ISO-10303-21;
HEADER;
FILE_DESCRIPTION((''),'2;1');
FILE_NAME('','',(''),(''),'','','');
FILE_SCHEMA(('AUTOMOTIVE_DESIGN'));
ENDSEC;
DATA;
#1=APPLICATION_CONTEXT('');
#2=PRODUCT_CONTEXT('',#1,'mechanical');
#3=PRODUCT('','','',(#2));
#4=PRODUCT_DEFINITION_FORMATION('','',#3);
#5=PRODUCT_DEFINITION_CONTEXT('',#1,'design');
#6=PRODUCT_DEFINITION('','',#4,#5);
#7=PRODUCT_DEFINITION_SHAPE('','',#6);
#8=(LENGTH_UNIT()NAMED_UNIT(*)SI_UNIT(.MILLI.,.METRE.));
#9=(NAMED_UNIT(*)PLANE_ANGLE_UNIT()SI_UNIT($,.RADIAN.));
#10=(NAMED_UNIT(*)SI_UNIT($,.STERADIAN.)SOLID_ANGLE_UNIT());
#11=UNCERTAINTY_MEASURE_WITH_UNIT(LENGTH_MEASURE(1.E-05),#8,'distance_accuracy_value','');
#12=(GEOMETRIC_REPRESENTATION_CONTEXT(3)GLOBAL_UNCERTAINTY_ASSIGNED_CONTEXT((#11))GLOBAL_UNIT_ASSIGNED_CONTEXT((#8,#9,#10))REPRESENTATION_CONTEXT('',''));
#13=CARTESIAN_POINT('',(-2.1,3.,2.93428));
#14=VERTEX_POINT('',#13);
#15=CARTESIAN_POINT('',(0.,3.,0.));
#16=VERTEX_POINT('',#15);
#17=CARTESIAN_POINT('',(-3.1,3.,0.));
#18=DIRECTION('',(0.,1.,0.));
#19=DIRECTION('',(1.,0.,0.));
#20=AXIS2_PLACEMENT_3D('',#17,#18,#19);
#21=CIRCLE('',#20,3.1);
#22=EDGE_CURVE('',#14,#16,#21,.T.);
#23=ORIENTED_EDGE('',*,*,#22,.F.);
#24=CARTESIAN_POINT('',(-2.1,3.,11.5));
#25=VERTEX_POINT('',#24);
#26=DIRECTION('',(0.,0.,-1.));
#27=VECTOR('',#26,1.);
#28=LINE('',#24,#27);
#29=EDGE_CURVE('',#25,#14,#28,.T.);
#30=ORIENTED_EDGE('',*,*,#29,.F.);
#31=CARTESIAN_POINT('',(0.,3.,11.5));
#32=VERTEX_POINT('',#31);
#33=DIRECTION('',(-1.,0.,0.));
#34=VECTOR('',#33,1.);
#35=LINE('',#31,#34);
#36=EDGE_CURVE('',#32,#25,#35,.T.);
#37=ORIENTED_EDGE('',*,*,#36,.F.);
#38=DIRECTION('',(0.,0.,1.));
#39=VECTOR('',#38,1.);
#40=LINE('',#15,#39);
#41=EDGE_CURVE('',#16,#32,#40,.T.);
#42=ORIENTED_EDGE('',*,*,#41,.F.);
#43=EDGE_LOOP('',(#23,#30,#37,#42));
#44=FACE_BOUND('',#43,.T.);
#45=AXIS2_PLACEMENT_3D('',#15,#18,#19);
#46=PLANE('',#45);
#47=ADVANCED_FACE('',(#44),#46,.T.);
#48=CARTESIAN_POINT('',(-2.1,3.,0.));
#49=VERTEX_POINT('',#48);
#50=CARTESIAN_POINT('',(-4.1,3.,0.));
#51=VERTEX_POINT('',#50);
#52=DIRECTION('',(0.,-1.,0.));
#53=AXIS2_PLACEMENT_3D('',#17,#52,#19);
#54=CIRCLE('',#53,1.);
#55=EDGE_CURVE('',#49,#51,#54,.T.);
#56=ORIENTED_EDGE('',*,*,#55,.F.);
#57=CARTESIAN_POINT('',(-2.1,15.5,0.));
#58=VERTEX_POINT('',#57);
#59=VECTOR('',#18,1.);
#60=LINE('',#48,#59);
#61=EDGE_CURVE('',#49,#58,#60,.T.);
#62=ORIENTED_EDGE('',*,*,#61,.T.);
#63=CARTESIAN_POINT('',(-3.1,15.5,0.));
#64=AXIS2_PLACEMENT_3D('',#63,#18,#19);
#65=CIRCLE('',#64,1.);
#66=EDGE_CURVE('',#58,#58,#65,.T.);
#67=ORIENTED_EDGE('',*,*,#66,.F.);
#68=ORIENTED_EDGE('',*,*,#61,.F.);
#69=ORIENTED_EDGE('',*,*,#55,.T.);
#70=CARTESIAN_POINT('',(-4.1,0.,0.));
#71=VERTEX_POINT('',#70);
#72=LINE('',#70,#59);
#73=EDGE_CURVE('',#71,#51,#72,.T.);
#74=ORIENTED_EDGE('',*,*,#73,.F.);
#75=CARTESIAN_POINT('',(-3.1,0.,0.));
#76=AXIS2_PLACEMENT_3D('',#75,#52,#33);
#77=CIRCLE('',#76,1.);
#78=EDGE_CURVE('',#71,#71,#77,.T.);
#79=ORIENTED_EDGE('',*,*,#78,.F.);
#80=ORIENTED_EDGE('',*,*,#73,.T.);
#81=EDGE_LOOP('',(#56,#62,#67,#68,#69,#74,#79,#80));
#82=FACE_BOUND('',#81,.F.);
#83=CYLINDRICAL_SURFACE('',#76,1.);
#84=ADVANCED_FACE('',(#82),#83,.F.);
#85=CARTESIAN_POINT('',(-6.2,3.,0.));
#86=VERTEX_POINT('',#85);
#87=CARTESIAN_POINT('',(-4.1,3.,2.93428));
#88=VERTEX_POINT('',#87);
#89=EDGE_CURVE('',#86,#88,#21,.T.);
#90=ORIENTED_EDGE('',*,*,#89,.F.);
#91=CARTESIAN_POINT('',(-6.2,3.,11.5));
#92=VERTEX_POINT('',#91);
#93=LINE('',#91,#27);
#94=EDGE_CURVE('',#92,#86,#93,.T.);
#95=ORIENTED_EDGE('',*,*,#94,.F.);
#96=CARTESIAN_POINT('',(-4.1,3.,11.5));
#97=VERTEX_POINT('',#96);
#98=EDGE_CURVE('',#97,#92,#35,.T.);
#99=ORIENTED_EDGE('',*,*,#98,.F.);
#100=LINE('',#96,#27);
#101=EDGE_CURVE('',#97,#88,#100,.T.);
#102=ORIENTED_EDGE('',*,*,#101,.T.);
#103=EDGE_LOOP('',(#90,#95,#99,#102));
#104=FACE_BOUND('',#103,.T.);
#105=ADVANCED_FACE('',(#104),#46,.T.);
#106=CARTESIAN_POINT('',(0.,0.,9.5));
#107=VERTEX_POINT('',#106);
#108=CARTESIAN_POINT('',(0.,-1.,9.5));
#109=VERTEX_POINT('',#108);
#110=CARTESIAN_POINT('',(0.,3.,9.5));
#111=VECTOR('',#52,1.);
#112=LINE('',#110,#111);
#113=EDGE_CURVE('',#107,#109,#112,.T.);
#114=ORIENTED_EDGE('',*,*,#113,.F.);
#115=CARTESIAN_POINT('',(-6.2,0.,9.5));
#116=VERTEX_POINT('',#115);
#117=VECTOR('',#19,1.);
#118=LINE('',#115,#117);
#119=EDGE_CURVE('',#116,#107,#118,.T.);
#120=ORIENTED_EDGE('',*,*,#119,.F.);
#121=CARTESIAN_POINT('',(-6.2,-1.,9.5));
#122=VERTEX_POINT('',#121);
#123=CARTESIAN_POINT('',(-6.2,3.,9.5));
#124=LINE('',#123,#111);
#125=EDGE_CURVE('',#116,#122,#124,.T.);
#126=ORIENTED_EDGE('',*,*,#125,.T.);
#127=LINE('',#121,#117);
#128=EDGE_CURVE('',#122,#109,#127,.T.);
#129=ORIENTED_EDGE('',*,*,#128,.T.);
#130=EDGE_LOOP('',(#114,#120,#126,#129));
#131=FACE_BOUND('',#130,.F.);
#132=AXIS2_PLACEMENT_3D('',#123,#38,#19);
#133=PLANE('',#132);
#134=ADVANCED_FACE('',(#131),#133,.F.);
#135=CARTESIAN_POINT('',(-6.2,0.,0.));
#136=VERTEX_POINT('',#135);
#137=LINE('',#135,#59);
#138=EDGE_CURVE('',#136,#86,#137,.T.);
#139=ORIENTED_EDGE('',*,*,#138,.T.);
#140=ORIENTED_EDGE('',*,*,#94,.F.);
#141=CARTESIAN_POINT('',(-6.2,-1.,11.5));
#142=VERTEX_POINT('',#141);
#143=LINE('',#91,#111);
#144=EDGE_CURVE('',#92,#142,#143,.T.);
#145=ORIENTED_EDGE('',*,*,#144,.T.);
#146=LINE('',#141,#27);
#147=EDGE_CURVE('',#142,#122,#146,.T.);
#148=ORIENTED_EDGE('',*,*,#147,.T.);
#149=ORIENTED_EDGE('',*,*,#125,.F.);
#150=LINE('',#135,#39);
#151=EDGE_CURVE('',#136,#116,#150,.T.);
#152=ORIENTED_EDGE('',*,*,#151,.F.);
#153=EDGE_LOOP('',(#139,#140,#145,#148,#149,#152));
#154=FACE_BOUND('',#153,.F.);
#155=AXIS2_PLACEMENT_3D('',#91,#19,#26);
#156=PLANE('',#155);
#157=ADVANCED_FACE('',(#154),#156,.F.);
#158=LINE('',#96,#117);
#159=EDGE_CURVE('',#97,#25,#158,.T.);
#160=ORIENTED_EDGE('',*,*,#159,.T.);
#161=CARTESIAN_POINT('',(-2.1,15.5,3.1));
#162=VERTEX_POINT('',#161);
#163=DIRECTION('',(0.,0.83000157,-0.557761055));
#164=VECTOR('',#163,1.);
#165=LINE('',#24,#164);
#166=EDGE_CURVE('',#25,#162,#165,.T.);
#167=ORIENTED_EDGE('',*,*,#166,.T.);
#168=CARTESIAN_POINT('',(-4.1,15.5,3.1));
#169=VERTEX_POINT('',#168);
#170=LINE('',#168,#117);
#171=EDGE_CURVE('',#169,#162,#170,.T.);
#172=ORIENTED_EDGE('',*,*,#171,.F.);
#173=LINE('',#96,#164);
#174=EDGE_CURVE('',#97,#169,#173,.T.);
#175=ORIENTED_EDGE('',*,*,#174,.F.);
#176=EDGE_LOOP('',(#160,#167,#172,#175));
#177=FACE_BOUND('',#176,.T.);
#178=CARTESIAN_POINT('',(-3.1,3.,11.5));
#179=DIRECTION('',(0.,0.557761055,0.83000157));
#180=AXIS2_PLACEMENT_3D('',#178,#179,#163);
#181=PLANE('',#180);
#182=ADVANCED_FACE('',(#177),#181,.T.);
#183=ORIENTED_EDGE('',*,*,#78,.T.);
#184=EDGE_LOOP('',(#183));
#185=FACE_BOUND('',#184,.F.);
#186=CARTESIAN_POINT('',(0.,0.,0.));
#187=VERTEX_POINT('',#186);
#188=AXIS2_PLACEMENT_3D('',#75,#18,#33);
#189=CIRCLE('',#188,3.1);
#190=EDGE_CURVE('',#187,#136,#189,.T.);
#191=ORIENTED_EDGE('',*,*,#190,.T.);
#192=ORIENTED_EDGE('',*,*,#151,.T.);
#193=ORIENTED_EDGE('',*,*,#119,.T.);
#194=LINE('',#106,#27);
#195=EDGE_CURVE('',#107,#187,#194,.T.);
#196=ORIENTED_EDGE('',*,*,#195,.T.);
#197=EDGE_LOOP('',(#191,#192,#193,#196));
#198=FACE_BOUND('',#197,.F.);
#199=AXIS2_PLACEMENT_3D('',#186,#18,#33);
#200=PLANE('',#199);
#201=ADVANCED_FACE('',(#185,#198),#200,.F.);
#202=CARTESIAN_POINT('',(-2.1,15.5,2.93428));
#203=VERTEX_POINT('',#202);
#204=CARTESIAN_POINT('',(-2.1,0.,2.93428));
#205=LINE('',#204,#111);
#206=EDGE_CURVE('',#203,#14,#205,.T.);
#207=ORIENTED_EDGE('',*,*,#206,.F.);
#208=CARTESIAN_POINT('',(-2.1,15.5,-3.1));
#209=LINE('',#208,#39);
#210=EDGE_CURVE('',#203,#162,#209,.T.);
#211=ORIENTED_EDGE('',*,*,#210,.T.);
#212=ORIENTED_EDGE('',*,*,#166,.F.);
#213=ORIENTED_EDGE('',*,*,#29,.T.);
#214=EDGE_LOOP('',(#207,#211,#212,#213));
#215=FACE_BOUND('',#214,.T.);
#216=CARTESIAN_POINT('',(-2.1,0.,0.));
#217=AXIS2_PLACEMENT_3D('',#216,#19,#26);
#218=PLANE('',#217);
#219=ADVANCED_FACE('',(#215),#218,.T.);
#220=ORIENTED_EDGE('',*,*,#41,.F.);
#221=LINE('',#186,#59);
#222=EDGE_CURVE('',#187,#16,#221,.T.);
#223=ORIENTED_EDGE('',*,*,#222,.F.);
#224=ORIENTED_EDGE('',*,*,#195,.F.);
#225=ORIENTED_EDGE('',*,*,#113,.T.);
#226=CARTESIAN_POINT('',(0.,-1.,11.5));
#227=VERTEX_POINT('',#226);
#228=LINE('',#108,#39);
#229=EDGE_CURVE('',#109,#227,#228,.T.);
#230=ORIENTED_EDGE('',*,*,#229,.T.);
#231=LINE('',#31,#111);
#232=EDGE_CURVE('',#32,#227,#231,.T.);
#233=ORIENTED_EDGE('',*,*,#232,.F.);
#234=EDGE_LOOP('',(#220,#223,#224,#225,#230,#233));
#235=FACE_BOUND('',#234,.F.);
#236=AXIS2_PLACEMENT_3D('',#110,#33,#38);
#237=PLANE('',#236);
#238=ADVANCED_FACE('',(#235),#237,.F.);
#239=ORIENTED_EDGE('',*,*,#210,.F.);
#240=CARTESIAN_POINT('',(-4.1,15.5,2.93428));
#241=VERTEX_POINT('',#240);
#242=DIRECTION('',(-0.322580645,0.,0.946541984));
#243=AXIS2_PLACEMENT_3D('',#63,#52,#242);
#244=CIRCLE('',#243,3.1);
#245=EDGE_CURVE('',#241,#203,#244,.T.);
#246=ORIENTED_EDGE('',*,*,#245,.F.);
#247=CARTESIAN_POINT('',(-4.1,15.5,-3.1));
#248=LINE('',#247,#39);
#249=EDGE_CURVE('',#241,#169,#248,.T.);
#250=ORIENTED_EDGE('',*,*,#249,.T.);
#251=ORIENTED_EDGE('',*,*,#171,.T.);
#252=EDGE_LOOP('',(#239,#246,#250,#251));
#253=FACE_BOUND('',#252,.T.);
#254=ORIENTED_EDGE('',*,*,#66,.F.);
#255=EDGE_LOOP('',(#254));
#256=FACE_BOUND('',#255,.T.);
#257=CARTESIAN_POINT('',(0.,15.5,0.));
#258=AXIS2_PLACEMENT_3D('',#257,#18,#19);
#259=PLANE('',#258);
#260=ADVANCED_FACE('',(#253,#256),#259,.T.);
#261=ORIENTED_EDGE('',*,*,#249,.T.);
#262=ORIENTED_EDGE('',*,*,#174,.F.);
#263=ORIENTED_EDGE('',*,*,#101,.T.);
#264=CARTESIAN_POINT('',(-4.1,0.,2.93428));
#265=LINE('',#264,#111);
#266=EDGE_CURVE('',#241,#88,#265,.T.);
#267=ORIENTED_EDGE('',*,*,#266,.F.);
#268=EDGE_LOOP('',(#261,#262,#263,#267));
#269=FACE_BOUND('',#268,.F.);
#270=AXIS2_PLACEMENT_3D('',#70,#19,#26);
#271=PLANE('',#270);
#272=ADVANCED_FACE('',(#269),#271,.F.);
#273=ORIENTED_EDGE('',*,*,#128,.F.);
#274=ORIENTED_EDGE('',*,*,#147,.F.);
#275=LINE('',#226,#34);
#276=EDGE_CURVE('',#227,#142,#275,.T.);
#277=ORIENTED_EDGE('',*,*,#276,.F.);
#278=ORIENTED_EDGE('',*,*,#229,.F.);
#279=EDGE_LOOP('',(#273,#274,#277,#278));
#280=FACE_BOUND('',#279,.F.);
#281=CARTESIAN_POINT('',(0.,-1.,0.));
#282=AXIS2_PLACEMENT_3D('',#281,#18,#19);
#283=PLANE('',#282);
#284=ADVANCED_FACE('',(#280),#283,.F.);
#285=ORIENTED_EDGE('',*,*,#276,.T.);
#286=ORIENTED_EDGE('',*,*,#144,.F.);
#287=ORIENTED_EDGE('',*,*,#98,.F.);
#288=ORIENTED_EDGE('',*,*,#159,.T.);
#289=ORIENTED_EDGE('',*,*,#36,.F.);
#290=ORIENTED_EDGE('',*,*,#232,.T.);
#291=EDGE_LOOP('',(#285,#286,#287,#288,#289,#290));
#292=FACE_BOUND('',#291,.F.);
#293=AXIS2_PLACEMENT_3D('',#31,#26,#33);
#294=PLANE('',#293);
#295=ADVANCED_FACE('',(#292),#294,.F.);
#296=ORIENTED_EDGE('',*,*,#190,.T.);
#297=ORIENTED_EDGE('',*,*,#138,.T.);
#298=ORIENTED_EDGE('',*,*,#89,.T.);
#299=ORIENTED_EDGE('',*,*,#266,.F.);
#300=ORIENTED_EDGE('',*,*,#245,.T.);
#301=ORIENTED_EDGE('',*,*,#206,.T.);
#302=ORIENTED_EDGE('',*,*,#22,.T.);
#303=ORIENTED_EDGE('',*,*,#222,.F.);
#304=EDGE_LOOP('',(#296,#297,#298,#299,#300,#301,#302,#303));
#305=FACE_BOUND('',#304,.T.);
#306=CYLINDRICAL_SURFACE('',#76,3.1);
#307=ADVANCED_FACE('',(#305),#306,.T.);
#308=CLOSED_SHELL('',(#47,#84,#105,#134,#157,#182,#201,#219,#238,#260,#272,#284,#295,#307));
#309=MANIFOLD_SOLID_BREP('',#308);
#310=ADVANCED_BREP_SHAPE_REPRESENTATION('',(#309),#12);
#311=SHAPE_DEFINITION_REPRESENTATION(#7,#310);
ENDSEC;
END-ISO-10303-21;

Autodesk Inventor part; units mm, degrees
ref_plane "YZ Plane" through (0, 0, 0) normal (1, 0, 0) x (0, 1, 0)
ref_plane "XZ Plane" through (0, 0, 0) normal (0, 1, 0) x (-1, 0, 0)
ref_plane "XY Plane" through (0, 0, 0) normal (0, 0, 1) x (1, 0, 0)
sketch "Sketch1" plane through (0, 0, 0) normal (0, 1, 0) x (-1, 0, 0)
  line L0 (0, 0) -> (6.2, 0)
  line L1 (6.2, 0) -> (6.2, 9.5)
  line L2 (6.2, 9.5) -> (0, 9.5)
  line L3 (0, 9.5) -> (0, 0)
  circle A0 centre (3.1, 0) radius 3.1
  circle A1 centre (3.1, 0) radius 1
  dimension "d2" = 6.2
  dimension "d3" = 9.5
  dimension "d4" = 2
extrude "Extrusion1" add sketch "Sketch1" along normal blind 3 contours A1 L0 A0 | L0 A0 A1 | A0 L3 L2 L1
sketch "Sketch2" plane through (0, 3, 0) normal (0, 1, 0) x (1, 0, 0)
  circle A0 centre (-3.1, 0) radius 1 projected
  line L0 (-6.2, 0) -> (-6.2, -9.5) projected
  circle A1 centre (-3.1, 0) radius 3.1
  circle A2 centre (-3.1, 0) radius 1
  point P0 (0, 0)
extrude "Extrusion2" add sketch "Sketch2" along normal blind 12.5
sketch "Sketch3" plane through (0, 3, 0) normal (0, 1, 0) x (1, 0, 0)
  line L0 (-6.2, -9.5) -> (0, -9.5) projected
  line L1 (-6.2, -9.5) -> (0, -9.5)
  line L2 (0, -9.5) -> (0, -11.5)
  line L3 (0, -11.5) -> (-6.2, -11.5)
  line L4 (-6.2, -11.5) -> (-6.2, -9.5)
  point P0 (0, 0)
  dimension "d9" = 2
extrude "Extrusion3" add sketch "Sketch3" against normal blind 4
ref_plane "Work Plane1" through (-3.1, 0, 0) normal (1, 0, 0) x (0, 0, -1)
sketch "Sketch4" plane through (-3.1, 0, 0) normal (1, 0, 0) x (0, 0, -1)
  line L0 (-11.5, 3) -> (0, 3) projected
  line L1 (3.1, 15.5) -> (-3.1, 15.5) projected
  line L2 (-11.5, 3) -> (-3.1, 15.5)
  line L3 (-1, 15.5) -> (1, 15.5) projected
  line L4 (-3.1, 15.5) -> (-1, 15.5)
  line L5 (-1, 15.5) -> (-1, 3)
  line L6 (-11.5, 3) -> (-11.5, -1) projected
  line L7 (-1, 3) -> (-11.5, 3)
  point P0 (0, 0)
extrude "Extrusion4" add sketch "Sketch4" along normal mid plane 2
properties part number "Pi3B_spacer_F"
